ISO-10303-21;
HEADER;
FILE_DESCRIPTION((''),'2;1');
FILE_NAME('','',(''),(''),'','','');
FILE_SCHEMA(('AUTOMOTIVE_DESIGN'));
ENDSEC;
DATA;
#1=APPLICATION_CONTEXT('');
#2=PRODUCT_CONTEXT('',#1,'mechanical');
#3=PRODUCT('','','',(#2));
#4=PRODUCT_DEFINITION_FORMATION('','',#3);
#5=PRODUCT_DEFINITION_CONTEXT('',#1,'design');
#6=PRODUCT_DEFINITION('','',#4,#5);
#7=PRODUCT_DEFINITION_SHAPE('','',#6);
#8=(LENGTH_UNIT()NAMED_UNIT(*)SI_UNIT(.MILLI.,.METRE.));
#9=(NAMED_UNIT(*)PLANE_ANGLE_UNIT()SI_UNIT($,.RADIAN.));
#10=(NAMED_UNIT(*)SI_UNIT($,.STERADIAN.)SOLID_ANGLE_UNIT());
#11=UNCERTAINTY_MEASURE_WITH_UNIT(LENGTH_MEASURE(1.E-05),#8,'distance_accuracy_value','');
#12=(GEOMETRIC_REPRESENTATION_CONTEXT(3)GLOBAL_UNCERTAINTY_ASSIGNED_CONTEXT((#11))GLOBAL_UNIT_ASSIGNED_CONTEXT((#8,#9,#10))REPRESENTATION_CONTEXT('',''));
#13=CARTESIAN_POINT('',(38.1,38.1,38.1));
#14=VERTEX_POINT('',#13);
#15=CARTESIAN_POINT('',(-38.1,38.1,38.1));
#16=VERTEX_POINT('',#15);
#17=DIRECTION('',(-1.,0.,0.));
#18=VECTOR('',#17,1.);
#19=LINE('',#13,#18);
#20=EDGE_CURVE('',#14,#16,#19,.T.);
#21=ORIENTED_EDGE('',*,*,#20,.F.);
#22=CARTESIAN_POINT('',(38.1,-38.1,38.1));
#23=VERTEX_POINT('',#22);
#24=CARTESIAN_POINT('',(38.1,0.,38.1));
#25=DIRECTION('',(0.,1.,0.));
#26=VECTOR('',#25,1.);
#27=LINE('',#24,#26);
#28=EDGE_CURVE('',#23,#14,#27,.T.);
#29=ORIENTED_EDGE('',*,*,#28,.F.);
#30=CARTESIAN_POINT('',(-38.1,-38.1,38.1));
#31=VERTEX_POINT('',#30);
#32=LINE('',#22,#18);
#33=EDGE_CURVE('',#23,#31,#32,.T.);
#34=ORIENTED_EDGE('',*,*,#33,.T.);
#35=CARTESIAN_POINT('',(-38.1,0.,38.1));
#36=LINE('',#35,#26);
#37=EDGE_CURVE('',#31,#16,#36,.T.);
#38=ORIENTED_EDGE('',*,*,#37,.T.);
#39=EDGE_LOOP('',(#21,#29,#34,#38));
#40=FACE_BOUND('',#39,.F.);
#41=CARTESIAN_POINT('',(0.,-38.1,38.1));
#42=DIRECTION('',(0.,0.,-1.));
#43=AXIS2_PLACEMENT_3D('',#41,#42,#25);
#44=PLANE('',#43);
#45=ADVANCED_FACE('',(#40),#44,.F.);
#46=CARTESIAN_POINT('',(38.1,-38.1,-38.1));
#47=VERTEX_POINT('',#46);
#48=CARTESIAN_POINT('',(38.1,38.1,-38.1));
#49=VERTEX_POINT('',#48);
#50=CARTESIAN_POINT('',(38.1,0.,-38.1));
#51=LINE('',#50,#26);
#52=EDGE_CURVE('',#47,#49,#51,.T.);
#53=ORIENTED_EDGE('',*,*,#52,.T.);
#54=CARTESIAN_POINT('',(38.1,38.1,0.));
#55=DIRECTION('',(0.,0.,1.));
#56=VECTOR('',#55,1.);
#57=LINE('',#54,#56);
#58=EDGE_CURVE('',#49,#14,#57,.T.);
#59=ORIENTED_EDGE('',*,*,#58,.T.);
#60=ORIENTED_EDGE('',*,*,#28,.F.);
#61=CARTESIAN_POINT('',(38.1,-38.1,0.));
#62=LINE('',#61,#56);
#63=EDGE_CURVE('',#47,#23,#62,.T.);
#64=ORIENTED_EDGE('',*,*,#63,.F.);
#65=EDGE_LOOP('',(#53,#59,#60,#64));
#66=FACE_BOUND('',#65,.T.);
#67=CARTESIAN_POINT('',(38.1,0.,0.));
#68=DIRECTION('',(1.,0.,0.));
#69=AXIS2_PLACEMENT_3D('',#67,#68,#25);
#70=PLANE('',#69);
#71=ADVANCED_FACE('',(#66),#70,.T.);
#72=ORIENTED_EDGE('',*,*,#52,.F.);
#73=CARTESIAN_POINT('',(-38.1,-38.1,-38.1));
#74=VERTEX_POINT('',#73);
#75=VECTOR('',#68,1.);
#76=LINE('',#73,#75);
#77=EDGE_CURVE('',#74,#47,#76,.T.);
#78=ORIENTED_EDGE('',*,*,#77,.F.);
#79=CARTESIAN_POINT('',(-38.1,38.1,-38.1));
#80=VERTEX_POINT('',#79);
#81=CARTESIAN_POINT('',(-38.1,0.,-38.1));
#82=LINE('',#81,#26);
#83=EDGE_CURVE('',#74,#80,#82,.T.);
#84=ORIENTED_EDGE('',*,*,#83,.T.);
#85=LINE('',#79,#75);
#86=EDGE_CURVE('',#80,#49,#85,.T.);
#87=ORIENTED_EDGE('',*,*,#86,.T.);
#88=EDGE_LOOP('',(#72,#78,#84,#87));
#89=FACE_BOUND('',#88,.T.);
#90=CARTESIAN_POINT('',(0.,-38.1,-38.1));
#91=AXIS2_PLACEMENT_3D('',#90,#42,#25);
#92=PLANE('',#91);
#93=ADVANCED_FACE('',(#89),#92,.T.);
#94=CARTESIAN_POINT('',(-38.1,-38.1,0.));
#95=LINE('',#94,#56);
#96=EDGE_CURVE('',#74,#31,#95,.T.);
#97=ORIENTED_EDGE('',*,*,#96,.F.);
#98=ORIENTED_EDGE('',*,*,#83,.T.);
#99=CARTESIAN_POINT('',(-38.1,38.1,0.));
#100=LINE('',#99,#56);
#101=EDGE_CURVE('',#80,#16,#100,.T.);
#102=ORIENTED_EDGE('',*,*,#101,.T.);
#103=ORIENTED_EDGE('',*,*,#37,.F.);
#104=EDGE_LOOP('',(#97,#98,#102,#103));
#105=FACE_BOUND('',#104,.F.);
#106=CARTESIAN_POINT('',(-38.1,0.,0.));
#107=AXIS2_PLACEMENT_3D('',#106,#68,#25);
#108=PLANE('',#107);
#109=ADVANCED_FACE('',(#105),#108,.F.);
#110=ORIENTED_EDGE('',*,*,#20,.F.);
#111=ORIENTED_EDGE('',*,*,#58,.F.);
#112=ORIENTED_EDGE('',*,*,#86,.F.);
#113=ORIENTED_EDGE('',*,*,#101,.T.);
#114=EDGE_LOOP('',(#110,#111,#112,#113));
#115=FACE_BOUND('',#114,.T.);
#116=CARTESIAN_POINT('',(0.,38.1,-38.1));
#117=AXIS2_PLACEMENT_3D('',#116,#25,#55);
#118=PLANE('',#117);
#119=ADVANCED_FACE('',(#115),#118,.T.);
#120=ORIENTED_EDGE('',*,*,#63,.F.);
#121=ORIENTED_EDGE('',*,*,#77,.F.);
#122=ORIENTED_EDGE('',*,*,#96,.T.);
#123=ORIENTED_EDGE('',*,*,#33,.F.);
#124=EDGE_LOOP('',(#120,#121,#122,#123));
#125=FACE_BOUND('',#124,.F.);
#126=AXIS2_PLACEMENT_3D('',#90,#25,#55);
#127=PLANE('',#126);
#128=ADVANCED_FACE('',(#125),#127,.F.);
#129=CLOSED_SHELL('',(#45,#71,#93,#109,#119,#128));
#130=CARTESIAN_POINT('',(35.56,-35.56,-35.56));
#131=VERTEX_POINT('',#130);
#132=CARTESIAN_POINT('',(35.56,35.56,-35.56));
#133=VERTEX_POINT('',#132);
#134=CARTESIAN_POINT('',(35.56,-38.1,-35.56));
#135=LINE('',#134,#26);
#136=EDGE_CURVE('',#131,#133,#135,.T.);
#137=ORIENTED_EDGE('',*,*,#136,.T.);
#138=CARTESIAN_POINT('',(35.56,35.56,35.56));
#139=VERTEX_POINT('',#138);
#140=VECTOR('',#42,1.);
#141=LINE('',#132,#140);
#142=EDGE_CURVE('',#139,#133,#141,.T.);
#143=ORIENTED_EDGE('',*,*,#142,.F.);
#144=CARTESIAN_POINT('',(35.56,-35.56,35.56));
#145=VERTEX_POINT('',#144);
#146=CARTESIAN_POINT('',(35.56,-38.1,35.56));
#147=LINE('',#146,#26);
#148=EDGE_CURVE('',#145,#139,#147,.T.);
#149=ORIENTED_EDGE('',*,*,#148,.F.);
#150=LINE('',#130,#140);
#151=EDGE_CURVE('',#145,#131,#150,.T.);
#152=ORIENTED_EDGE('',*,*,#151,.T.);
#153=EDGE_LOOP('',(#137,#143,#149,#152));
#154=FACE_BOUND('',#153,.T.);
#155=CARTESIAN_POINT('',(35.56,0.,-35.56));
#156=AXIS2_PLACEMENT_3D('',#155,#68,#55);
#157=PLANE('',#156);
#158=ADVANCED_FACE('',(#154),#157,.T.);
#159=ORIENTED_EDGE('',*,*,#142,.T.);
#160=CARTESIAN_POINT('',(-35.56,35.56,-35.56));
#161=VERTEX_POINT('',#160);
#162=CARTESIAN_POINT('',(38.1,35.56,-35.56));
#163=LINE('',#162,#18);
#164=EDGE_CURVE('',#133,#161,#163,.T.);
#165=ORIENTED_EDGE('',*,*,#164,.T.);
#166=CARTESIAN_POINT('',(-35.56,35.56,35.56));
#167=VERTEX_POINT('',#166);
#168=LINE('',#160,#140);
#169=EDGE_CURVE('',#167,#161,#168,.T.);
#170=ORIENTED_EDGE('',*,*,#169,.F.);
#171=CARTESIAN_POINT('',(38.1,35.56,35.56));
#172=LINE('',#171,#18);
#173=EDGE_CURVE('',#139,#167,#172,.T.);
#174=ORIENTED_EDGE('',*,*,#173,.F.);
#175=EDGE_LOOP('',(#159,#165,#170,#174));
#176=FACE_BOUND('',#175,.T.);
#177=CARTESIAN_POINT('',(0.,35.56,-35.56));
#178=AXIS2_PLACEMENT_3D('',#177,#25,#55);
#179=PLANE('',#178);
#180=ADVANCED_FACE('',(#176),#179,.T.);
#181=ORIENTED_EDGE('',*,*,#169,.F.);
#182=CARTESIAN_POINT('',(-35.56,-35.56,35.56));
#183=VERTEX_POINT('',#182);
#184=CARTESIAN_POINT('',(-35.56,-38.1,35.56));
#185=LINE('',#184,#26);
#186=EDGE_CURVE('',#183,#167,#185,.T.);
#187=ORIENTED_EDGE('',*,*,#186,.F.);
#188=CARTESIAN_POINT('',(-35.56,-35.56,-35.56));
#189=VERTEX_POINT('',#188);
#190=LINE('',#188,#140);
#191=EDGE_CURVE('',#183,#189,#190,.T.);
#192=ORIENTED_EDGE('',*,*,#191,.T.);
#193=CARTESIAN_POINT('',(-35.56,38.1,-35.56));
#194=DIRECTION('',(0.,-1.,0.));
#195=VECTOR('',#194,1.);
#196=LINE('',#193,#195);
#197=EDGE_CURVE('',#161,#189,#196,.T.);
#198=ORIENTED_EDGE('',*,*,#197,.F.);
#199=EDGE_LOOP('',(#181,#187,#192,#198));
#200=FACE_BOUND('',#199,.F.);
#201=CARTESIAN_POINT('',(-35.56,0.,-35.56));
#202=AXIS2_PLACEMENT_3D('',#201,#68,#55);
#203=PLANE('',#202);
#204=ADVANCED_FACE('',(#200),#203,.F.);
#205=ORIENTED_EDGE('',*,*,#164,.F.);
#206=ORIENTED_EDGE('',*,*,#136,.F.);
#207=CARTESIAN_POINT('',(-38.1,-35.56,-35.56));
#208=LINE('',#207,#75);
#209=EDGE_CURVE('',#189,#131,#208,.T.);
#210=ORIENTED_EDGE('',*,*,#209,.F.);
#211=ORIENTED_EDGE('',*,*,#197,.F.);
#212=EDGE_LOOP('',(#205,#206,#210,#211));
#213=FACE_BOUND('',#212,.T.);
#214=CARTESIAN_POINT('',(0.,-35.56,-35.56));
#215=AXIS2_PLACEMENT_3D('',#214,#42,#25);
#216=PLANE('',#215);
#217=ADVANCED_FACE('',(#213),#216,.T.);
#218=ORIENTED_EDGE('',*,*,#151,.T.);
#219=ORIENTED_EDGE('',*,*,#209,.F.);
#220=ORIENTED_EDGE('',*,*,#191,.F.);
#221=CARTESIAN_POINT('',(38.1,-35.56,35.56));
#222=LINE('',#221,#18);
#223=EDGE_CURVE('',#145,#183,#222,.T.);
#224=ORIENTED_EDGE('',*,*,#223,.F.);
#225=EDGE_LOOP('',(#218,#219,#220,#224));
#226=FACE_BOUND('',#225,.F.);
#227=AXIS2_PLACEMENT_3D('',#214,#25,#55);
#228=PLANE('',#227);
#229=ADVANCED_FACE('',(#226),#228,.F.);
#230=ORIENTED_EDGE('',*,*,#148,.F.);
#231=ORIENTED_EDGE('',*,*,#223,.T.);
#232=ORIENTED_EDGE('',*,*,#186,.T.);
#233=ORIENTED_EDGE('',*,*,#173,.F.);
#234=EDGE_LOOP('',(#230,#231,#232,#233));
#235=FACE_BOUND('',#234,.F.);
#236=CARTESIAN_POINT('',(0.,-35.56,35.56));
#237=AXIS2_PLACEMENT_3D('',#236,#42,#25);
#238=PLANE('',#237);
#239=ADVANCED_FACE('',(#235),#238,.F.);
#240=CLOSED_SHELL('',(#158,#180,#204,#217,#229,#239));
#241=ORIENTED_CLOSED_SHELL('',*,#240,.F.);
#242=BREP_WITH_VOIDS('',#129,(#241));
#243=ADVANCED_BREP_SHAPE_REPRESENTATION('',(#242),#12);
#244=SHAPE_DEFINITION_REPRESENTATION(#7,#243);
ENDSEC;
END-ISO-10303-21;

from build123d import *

# Parameters (mm, degrees)
F3_W     = 76.2
F3_H     = 76.2
F3_W_2   = 71.12
F3_H_2   = 71.12
F4_DEPTH = 38.1
F2_W     = 76.2
F2_H     = 76.2
F2_W_2   = 71.12
F2_H_2   = 71.12
F5_DEPTH = 38.1


# Not quite as in the source:
# - a variable given as a bare number and used for a length is read in inches; the dataset says mm whatever the document's units were


with BuildPart() as f4:
    # F3 (on Right) → F4 (new body, symmetric)
    with BuildSketch(Plane.YZ):
        Rectangle(F3_W, F3_H)
        Rectangle(F3_W_2, F3_H_2, mode=Mode.SUBTRACT)
    extrude(amount=F4_DEPTH, both=True)

    # F2 (on Front) → F5 (join, symmetric)
    with BuildSketch(Plane.XZ):
        Rectangle(F2_W, F2_H)
        Rectangle(F2_W_2, F2_H_2, mode=Mode.SUBTRACT)
    extrude(amount=F5_DEPTH, both=True)


solid = f4.part
